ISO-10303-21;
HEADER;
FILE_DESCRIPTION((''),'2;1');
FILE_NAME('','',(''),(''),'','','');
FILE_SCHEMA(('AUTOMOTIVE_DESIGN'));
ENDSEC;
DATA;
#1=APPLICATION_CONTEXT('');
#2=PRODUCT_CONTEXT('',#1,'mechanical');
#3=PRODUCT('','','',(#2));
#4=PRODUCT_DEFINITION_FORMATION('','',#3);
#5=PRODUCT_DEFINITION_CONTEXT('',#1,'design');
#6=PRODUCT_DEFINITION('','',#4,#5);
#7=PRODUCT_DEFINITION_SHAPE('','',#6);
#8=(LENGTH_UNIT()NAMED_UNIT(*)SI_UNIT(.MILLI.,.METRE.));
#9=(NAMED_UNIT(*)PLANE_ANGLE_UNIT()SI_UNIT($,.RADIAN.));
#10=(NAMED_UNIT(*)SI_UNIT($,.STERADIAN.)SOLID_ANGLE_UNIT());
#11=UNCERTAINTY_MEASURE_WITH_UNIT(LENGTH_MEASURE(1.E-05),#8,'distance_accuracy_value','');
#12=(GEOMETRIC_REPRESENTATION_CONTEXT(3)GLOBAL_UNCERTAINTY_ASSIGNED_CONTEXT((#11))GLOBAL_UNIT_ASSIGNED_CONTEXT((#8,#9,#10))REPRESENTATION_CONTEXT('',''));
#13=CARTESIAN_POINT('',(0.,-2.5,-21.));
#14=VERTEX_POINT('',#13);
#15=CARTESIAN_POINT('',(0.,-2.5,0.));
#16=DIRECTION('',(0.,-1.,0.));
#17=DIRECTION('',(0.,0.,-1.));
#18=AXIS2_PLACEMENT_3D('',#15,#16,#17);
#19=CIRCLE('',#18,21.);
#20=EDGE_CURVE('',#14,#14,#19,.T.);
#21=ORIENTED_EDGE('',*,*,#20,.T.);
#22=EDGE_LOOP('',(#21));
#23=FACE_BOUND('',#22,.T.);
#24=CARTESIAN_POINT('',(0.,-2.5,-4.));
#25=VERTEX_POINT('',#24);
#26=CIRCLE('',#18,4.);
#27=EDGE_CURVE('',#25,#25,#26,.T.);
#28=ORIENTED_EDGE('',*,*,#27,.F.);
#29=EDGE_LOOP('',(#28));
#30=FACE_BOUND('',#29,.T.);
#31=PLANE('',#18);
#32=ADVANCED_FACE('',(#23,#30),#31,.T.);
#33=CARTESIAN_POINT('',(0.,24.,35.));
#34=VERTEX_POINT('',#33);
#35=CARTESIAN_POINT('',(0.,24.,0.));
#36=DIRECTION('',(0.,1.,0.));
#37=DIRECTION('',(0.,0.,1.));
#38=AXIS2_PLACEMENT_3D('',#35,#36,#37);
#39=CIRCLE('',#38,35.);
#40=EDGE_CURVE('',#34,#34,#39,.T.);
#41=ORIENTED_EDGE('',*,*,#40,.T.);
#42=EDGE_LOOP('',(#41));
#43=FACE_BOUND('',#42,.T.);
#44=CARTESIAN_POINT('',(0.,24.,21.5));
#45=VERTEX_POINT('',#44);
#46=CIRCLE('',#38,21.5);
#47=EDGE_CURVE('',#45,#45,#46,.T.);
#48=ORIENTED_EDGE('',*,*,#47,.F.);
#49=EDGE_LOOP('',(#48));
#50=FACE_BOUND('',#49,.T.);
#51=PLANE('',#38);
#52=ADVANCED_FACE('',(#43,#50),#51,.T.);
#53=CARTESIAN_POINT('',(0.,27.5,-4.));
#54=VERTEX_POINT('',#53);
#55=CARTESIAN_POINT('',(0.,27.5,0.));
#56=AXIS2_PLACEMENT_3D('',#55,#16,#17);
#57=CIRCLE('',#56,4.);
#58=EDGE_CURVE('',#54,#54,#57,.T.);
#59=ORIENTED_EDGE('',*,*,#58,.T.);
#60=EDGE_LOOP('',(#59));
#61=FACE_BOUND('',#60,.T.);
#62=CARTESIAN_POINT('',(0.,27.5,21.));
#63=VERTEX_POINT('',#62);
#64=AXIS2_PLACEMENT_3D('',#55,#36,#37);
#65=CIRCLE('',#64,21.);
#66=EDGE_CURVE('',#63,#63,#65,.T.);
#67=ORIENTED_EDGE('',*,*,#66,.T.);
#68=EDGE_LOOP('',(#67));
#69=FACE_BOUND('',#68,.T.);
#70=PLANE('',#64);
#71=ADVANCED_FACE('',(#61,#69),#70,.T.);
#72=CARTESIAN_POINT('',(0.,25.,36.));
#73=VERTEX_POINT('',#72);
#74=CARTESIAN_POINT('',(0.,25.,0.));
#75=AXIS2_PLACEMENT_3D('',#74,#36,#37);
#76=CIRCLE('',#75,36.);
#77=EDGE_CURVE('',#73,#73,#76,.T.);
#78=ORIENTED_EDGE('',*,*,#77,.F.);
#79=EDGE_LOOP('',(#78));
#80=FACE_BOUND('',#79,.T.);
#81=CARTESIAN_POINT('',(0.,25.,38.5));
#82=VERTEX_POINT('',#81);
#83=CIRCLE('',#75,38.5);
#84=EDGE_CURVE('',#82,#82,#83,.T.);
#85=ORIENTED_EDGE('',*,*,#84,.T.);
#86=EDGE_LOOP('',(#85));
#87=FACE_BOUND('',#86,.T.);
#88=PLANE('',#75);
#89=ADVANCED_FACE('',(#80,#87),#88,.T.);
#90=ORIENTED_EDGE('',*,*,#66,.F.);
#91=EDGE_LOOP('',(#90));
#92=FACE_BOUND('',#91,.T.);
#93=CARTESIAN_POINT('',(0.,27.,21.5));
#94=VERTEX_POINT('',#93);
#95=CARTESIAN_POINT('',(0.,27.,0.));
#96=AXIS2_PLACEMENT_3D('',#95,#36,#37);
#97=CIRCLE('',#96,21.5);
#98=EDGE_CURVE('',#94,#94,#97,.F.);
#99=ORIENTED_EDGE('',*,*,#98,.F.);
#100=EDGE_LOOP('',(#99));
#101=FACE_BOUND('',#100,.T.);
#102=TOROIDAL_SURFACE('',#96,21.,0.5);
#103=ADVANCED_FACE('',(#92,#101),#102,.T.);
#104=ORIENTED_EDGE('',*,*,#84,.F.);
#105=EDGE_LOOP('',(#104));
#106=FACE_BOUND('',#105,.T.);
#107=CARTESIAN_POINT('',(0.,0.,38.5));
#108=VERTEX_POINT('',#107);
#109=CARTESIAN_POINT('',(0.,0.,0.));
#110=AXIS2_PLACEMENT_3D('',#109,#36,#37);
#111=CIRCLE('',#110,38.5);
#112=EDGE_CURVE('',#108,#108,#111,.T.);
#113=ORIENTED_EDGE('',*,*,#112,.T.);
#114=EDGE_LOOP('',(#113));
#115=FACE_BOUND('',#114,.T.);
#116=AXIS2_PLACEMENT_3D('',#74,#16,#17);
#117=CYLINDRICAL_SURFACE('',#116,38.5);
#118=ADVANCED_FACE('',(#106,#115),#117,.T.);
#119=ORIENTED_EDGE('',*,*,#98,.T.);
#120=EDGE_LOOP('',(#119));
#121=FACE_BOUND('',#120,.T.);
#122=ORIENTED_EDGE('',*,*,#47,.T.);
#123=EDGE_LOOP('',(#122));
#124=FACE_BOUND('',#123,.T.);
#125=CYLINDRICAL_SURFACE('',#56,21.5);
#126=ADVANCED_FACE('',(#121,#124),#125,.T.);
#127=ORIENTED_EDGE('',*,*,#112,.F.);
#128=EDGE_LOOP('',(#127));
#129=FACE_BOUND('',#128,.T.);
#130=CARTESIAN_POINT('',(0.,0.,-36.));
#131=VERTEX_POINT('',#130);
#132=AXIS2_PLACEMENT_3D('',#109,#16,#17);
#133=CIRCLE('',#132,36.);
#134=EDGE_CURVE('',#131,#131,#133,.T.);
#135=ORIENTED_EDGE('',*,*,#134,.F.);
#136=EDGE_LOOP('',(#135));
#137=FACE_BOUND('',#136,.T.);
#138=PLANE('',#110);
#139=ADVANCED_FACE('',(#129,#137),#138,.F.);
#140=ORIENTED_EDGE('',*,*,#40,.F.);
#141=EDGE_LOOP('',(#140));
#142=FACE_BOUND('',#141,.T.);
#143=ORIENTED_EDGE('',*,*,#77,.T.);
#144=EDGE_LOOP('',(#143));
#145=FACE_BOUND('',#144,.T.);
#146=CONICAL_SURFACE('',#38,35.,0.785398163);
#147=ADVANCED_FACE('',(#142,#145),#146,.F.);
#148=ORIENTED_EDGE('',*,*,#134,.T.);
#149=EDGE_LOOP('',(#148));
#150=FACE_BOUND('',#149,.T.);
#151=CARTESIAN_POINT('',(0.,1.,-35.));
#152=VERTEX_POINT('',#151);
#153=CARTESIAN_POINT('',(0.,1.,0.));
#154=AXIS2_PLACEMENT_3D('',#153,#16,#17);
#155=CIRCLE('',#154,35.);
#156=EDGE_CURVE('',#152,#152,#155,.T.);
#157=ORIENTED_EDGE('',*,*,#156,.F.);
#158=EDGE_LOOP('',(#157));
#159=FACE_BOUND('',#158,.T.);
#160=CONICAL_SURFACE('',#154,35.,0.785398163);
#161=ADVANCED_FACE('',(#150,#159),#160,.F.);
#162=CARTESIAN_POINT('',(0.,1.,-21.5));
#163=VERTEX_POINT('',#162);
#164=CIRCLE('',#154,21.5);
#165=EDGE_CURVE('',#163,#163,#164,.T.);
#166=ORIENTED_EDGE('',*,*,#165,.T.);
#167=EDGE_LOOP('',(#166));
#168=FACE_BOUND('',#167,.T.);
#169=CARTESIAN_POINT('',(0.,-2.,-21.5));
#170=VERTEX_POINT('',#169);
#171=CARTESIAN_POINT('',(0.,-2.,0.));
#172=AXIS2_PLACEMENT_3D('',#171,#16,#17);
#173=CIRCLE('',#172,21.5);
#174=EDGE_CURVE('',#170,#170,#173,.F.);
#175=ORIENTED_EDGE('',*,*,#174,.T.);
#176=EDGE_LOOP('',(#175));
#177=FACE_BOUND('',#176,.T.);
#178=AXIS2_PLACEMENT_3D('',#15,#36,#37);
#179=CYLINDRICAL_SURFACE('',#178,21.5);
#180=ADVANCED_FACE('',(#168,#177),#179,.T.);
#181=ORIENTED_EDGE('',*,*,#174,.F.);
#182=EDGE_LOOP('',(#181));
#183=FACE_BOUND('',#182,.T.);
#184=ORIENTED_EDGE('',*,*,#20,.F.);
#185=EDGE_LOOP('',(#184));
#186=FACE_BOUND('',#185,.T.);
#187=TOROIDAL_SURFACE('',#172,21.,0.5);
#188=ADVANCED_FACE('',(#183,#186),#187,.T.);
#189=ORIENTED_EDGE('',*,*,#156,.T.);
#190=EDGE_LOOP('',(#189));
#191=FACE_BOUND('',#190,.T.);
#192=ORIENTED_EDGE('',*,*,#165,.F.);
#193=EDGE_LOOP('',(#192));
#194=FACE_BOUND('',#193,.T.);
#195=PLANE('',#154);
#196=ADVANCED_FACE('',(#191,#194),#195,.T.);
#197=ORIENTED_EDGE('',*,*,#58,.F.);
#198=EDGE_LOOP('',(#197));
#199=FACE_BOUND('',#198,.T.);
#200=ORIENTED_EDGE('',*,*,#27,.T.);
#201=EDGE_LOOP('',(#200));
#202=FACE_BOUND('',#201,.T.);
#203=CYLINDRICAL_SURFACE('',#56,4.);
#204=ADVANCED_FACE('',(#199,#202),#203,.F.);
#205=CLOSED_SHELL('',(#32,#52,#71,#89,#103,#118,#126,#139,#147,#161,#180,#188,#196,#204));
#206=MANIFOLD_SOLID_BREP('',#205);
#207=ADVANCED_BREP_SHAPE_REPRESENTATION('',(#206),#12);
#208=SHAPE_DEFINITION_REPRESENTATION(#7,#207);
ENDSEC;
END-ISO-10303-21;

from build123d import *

# Parameters (mm, degrees)
EXTRUDE_1_DEPTH     = 25
CUT_EXTRUDE_3_DEPTH = 1
CUT_EXTRUDE_START   = -1
CUT_EXTRUDE_4_DEPTH = 1
CHAMFER_1_SIZE      = 1
EXTRUDE_2_DEPTH     = 3.5
EXTRUDE_START       = 3.5
EXTRUDE_3_DEPTH     = 3.5
FILLET_1_R          = 0.5
SKETCH_6_R          = 4
CUT_EXTRUDE_5_DEPTH = 63.165102751


with BuildPart() as part:
    # ｽｹｯﾁ1 → ﾎﾞｽ - 押し出し1 (new body)
    with BuildSketch(Plane(origin=(0, 0, 0), x_dir=(1, 0, 0), z_dir=(0, 1, 0))):
        with BuildLine():
            ThreePointArc((35.980947353, 13.697497128), (22.958239241, 30.905812576), (2.722143787, 38.403644791))
            ThreePointArc((2.722143787, 38.403644791), (-28.169598292, -26.243546485), (38.5, 0))
            ThreePointArc((38.5, 0), (37.865000153, 6.963602764), (35.980947353, 13.697497128))
        make_face()
    extrude(amount=EXTRUDE_1_DEPTH)

    # ｽｹｯﾁ2 → ｶｯﾄ - 押し出し3 (cut)
    with BuildSketch(Plane(origin=(0, 25, 0), x_dir=(1, 0, 0), z_dir=(0, 1, 0))):
        with BuildLine():
            ThreePointArc((34.036718994, 11.726114452), (21.467444485, 28.898941629), (1.396281143, 35.972912017))
            ThreePointArc((1.396281143, 35.972912017), (-25.94480797, -24.957302327), (36, 0))
            ThreePointArc((36, 0), (35.505787442, 5.944666358), (34.036718994, 11.726114452))
        make_face()
    extrude(amount=-CUT_EXTRUDE_3_DEPTH, mode=Mode.SUBTRACT)

    # ｽｹｯﾁ3 → ｶｯﾄ - 押し出し4 (cut)
    with BuildSketch(Plane.XZ.offset(CUT_EXTRUDE_START)):
        with BuildLine():
            ThreePointArc((34.036718994, 11.726114452), (21.467444485, 28.898941629), (1.396281143, 35.972912017))
            ThreePointArc((1.396281143, 35.972912017), (-25.94480797, -24.957302327), (36, 0))
            ThreePointArc((36, 0), (35.505787442, 5.944666358), (34.036718994, 11.726114452))
        make_face()
    extrude(amount=CUT_EXTRUDE_4_DEPTH, mode=Mode.SUBTRACT)

    # 面取り1
    chamfer_1_edges = [part.edges().sort_by_distance(p)[0] for p in [
        (-36, 1, 0),
        (-36, 24, 0),
    ]]
    chamfer(chamfer_1_edges, length=CHAMFER_1_SIZE - 0.0001)  # a hair under: the kernel refuses the full size

    # ｽｹｯﾁ4 → ﾎﾞｽ - 押し出し2 (add)
    with BuildSketch(Plane.XZ.offset(-1)):
        with BuildLine():
            ThreePointArc((21.5, 0), (11.339952646, 18.266238638), (-9.537718509, 19.268677319))
            ThreePointArc((-9.537718509, 19.268677319), (-12.820834901, -17.25909014), (21.202158445, -3.566297417))
            ThreePointArc((21.202158445, -3.566297417), (21.425410224, -1.789356508), (21.5, 0))
        make_face()
    extrude(amount=EXTRUDE_2_DEPTH)

    # ｽｹｯﾁ5 → ﾎﾞｽ - 押し出し3 (add)
    with BuildSketch(Plane(origin=(0, 24, 0), x_dir=(1, 0, 0), z_dir=(0, 1, 0)).offset(EXTRUDE_START)):
        with BuildLine():
            ThreePointArc((21.5, 0), (11.339952646, 18.266238638), (-9.537718509, 19.268677319))
            ThreePointArc((-9.537718509, 19.268677319), (-12.820834901, -17.25909014), (21.202158445, -3.566297417))
            ThreePointArc((21.202158445, -3.566297417), (21.425410224, -1.789356508), (21.5, 0))
        make_face()
    extrude(amount=-EXTRUDE_3_DEPTH)

    # ﾌｨﾚｯﾄ1
    fillet_1_edges = [part.edges().sort_by_distance(p)[0] for p in [
        (-21.202158445, -2.5, 3.566297417),
        (-21.202158445, 27.5, -3.566297417),
    ]]
    fillet(fillet_1_edges, radius=FILLET_1_R)

    # ｽｹｯﾁ6 → ｶｯﾄ - 押し出し5 (cut, through all)
    with BuildSketch(Plane.XZ.offset(2.5)):
        with Locations(Location((0, 0, 0), (0, 0, 270))):
            Circle(SKETCH_6_R)
    extrude(amount=-CUT_EXTRUDE_5_DEPTH, mode=Mode.SUBTRACT)


solid = part.part
